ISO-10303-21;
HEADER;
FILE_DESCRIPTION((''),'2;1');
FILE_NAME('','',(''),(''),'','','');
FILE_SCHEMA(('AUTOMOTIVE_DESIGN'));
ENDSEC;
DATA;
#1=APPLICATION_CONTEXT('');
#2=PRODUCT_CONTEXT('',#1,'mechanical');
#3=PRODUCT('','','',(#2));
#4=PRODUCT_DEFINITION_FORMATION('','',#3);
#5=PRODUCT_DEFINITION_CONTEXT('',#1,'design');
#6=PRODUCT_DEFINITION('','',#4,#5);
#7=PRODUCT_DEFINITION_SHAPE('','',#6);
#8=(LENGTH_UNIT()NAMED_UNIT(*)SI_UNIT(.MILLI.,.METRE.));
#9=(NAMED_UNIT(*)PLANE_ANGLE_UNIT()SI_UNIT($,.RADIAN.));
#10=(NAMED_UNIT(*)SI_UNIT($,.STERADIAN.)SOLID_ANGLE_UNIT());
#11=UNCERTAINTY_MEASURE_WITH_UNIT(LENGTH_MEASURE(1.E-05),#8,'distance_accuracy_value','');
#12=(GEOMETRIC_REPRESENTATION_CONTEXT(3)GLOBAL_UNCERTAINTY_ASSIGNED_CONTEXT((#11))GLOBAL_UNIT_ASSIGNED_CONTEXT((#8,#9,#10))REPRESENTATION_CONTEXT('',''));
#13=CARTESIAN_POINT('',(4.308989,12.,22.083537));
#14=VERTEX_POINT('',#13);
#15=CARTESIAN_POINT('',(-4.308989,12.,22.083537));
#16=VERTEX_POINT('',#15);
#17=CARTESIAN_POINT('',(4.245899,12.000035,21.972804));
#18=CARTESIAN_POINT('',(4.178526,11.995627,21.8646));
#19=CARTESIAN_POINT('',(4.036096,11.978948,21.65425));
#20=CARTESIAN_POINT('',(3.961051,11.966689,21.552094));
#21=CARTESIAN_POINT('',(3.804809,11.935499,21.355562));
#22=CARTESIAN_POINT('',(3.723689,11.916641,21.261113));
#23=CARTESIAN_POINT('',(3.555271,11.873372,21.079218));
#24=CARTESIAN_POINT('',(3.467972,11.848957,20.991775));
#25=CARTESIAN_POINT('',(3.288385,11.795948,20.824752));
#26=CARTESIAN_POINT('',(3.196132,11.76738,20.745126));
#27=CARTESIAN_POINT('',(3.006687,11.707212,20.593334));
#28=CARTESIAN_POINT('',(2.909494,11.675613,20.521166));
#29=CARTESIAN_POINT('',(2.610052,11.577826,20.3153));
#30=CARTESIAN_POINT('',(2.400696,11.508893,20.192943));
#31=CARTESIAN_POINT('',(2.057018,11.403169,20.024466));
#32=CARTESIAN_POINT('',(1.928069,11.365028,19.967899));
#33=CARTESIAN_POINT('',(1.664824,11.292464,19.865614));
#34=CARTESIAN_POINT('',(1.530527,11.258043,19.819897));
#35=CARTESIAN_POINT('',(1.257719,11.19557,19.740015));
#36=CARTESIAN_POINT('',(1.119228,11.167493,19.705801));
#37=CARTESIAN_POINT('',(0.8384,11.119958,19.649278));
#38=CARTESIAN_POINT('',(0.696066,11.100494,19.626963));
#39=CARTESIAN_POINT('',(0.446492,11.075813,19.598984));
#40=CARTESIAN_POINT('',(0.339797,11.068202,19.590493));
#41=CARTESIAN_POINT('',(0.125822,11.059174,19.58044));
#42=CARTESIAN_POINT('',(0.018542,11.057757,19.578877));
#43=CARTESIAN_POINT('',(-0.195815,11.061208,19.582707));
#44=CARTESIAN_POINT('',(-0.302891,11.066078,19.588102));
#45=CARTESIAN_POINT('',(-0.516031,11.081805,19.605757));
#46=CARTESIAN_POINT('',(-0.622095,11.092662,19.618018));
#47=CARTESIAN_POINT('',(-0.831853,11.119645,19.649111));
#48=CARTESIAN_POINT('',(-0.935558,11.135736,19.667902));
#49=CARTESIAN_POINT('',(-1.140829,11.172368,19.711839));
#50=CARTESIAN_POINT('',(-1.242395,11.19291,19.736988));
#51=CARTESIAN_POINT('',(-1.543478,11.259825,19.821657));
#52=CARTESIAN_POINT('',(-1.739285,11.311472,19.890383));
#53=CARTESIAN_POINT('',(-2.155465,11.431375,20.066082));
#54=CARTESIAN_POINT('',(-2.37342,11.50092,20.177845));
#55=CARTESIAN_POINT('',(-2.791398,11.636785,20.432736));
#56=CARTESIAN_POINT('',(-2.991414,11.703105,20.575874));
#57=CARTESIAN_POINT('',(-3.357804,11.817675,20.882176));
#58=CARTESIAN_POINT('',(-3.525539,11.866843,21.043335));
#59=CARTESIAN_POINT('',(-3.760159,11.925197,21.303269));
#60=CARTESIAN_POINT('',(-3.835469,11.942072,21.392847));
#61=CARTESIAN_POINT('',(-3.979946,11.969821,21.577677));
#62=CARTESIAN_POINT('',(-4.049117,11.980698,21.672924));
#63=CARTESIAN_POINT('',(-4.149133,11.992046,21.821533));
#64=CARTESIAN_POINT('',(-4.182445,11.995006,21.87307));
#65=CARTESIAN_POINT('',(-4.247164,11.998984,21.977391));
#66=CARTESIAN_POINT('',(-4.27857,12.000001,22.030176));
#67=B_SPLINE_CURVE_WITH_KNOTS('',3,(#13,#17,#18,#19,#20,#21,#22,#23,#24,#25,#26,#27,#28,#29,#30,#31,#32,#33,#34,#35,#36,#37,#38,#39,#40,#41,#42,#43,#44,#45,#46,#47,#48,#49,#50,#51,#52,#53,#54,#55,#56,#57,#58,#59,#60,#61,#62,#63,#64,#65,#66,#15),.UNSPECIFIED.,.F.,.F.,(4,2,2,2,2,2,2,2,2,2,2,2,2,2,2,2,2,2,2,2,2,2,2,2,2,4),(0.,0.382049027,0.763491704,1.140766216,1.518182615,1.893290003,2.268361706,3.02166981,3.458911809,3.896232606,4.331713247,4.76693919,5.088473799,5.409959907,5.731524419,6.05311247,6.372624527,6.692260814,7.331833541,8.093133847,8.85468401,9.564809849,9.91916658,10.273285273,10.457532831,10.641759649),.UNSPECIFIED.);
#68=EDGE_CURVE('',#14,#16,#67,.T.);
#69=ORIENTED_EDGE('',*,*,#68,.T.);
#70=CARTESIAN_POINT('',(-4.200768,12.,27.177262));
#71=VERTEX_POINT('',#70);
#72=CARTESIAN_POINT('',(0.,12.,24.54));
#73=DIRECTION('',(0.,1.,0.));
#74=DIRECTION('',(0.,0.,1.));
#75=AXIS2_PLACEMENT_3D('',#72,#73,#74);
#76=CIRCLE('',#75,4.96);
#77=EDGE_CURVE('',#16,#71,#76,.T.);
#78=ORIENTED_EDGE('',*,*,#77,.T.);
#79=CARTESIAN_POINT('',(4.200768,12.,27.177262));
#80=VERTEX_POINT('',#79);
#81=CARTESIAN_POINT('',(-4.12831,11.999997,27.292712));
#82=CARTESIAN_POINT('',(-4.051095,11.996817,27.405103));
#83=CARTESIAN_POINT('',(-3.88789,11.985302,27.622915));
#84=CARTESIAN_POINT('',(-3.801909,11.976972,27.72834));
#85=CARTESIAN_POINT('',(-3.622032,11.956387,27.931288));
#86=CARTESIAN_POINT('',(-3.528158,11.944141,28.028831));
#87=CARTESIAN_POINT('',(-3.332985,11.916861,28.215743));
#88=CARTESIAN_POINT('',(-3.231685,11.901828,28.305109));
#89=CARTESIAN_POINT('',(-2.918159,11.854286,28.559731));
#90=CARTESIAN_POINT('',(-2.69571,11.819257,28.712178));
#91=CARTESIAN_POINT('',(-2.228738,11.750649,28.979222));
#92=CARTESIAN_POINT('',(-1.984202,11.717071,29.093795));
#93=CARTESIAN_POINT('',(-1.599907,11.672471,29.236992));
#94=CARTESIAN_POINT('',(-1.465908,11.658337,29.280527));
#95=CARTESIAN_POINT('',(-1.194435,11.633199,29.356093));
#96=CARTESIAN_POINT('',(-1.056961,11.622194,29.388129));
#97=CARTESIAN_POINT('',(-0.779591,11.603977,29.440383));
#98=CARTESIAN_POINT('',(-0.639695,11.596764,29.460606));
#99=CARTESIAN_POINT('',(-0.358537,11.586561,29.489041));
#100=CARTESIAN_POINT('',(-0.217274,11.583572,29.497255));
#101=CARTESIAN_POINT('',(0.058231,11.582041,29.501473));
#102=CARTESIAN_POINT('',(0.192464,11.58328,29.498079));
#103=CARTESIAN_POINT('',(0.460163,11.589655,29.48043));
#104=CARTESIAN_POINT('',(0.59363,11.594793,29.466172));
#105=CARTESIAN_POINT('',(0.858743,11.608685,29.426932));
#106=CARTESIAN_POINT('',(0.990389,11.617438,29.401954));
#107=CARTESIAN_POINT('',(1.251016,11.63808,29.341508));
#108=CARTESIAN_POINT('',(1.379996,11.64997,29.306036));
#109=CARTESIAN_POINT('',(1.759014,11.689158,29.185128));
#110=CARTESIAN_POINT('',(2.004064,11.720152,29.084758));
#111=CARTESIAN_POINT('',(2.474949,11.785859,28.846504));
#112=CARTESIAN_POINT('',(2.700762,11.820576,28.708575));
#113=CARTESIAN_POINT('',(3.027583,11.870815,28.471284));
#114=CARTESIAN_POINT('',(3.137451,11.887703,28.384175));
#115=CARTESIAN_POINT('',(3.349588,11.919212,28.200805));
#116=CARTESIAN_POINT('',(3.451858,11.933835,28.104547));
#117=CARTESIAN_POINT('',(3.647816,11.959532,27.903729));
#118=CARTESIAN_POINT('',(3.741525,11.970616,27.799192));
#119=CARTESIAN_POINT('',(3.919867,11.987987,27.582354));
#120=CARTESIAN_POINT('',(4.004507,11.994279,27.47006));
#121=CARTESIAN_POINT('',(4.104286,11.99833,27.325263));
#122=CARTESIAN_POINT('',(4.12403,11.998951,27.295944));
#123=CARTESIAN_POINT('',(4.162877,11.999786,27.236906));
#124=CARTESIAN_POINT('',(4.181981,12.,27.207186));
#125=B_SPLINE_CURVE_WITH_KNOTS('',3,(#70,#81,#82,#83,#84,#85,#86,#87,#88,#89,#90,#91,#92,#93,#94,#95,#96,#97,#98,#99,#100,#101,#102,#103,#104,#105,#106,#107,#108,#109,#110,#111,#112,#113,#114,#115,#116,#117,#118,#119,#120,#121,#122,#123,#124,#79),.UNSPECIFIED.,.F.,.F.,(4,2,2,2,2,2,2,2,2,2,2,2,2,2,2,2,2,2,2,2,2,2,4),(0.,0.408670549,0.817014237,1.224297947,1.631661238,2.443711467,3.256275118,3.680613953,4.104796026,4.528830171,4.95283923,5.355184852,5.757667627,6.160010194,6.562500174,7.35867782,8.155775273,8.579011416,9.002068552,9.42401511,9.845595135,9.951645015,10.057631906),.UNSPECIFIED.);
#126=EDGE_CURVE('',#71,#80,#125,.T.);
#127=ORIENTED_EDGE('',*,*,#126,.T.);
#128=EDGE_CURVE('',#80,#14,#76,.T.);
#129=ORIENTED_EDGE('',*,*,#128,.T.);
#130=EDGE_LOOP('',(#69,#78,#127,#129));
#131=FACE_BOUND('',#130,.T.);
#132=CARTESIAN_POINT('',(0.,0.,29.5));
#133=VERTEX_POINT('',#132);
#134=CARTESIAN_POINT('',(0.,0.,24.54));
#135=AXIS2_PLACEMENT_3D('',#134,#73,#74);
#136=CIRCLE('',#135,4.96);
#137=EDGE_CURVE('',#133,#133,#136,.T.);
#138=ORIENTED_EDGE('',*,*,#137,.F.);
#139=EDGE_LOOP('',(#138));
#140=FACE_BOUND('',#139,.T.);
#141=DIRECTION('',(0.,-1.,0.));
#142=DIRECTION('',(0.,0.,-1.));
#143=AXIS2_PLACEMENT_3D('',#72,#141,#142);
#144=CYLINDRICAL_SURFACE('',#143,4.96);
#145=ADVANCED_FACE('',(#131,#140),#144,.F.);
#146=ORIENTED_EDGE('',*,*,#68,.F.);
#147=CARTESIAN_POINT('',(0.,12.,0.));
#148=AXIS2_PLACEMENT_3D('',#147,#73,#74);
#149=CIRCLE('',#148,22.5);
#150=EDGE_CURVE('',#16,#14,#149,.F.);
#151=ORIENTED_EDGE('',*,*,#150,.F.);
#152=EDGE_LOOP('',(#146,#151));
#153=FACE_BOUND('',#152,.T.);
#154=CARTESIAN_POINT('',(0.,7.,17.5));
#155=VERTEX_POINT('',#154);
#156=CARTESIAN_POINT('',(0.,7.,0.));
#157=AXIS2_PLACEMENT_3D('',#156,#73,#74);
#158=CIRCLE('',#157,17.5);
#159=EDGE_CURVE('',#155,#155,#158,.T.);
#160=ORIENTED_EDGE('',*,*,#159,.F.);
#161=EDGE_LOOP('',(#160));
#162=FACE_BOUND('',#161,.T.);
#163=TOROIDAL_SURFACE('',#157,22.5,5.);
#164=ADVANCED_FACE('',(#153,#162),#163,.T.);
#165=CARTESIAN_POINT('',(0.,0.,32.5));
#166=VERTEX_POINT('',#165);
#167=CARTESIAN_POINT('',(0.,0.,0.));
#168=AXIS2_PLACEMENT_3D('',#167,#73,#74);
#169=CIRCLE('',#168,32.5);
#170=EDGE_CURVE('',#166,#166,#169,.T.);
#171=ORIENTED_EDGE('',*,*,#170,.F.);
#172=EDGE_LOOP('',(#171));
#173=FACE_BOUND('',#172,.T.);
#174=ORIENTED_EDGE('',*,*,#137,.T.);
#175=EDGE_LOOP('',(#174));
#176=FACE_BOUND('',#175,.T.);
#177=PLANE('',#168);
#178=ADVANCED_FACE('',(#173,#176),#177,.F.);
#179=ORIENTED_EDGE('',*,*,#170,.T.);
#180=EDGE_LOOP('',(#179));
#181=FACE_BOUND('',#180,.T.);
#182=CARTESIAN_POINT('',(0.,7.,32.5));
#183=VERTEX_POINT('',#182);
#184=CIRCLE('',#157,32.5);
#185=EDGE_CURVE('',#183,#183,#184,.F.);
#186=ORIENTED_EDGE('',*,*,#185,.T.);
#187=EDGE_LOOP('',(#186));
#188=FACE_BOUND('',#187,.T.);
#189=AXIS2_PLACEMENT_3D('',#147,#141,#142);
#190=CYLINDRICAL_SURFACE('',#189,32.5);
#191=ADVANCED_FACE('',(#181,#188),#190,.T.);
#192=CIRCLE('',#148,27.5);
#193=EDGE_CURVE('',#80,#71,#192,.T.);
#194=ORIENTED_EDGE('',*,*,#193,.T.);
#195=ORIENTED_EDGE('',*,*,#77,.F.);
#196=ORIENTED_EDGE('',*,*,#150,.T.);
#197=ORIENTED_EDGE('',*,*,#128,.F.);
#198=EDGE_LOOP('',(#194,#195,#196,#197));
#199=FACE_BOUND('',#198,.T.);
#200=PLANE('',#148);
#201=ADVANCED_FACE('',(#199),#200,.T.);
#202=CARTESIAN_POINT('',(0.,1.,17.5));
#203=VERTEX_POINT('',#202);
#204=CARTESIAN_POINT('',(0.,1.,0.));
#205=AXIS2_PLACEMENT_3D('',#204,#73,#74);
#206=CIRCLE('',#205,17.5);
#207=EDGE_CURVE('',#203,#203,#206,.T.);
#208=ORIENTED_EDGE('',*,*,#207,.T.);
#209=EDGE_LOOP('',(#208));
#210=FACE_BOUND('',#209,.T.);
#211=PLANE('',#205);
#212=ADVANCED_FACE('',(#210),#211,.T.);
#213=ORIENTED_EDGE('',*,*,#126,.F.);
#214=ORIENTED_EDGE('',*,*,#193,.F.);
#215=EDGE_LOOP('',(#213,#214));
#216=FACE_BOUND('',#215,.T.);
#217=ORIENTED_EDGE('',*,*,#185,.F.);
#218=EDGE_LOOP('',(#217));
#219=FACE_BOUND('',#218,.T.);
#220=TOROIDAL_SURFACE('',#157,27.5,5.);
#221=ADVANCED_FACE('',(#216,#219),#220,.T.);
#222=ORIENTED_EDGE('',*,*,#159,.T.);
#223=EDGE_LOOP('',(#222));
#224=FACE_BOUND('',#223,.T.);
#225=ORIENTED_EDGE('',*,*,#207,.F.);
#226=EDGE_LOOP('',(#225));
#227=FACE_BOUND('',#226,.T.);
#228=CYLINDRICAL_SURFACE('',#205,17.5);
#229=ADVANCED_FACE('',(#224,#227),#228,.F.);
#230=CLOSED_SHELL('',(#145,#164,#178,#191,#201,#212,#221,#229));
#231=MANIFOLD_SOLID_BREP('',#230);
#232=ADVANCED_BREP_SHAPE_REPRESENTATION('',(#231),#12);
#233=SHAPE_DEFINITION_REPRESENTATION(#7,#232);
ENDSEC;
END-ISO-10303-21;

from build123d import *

# Parameters (mm, degrees)
CROQUIS1_R              = 32.5
CROQUIS1_R_2            = 4.96
SALIENTE_EXTRUIR1_DEPTH = 12
CROQUIS2_R              = 17.5
CORTAR_EXTRUIR1_DEPTH   = 11
REDONDEO4_R             = 5
REDONDEO5_R             = 5


with BuildPart() as part:
    # Croquis1 → Saliente-Extruir1 (new body)
    with BuildSketch(Plane(origin=(0, 0, 0), x_dir=(1, 0, 0), z_dir=(0, 1, 0))):
        with Locations(Location((0, 0, 0), (0, 0, 270))):
            Circle(CROQUIS1_R)
        with Locations(Location((0, -24.54, 0), (0, 0, 270))):
            Circle(CROQUIS1_R_2, mode=Mode.SUBTRACT)
    extrude(amount=SALIENTE_EXTRUIR1_DEPTH)

    # Croquis2 → Cortar-Extruir1 (cut)
    with BuildSketch(Plane(origin=(0, 12, 0), x_dir=(1, 0, 0), z_dir=(0, 1, 0))):
        with Locations(Location((0, 0, 0), (0, 0, 270))):
            Circle(CROQUIS2_R)
    extrude(amount=-CORTAR_EXTRUIR1_DEPTH, mode=Mode.SUBTRACT)

    # Redondeo4
    # the kernel refuses this fillet: 5 mm, written as the material it takes off along each edge
    with BuildSketch(Plane(origin=(0, 12, 0), x_dir=(0, 0, 1), z_dir=(-1, 0, 0))) as redondeo4_piece_1:
        with BuildLine():
            CenterArc((32.5 - REDONDEO4_R, -REDONDEO4_R), REDONDEO4_R, 0, 90)
            Line((32.5 - REDONDEO4_R, 0), (32.5, 0))
            Line((32.5, 0), (32.5, -REDONDEO4_R))
        make_face()
    revolve(axis=Axis((0, 12, 0), (0, 1, 0)), mode=Mode.SUBTRACT)

    # Redondeo5
    # the kernel refuses this fillet: 5 mm, written as the material it takes off along each edge
    with BuildSketch(Plane(origin=(0, 12, 0), x_dir=(0, 0, 1), z_dir=(-1, 0, 0))) as redondeo5_piece_1:
        with BuildLine():
            CenterArc((17.5 + REDONDEO5_R, -REDONDEO5_R), REDONDEO5_R, 90, 90)
            Line((17.5, -REDONDEO5_R), (17.5, 0))
            Line((17.5, 0), (17.5 + REDONDEO5_R, 0))
        make_face()
    revolve(axis=Axis((0, 12, 0), (0, 1, 0)), mode=Mode.SUBTRACT)


solid = part.part
